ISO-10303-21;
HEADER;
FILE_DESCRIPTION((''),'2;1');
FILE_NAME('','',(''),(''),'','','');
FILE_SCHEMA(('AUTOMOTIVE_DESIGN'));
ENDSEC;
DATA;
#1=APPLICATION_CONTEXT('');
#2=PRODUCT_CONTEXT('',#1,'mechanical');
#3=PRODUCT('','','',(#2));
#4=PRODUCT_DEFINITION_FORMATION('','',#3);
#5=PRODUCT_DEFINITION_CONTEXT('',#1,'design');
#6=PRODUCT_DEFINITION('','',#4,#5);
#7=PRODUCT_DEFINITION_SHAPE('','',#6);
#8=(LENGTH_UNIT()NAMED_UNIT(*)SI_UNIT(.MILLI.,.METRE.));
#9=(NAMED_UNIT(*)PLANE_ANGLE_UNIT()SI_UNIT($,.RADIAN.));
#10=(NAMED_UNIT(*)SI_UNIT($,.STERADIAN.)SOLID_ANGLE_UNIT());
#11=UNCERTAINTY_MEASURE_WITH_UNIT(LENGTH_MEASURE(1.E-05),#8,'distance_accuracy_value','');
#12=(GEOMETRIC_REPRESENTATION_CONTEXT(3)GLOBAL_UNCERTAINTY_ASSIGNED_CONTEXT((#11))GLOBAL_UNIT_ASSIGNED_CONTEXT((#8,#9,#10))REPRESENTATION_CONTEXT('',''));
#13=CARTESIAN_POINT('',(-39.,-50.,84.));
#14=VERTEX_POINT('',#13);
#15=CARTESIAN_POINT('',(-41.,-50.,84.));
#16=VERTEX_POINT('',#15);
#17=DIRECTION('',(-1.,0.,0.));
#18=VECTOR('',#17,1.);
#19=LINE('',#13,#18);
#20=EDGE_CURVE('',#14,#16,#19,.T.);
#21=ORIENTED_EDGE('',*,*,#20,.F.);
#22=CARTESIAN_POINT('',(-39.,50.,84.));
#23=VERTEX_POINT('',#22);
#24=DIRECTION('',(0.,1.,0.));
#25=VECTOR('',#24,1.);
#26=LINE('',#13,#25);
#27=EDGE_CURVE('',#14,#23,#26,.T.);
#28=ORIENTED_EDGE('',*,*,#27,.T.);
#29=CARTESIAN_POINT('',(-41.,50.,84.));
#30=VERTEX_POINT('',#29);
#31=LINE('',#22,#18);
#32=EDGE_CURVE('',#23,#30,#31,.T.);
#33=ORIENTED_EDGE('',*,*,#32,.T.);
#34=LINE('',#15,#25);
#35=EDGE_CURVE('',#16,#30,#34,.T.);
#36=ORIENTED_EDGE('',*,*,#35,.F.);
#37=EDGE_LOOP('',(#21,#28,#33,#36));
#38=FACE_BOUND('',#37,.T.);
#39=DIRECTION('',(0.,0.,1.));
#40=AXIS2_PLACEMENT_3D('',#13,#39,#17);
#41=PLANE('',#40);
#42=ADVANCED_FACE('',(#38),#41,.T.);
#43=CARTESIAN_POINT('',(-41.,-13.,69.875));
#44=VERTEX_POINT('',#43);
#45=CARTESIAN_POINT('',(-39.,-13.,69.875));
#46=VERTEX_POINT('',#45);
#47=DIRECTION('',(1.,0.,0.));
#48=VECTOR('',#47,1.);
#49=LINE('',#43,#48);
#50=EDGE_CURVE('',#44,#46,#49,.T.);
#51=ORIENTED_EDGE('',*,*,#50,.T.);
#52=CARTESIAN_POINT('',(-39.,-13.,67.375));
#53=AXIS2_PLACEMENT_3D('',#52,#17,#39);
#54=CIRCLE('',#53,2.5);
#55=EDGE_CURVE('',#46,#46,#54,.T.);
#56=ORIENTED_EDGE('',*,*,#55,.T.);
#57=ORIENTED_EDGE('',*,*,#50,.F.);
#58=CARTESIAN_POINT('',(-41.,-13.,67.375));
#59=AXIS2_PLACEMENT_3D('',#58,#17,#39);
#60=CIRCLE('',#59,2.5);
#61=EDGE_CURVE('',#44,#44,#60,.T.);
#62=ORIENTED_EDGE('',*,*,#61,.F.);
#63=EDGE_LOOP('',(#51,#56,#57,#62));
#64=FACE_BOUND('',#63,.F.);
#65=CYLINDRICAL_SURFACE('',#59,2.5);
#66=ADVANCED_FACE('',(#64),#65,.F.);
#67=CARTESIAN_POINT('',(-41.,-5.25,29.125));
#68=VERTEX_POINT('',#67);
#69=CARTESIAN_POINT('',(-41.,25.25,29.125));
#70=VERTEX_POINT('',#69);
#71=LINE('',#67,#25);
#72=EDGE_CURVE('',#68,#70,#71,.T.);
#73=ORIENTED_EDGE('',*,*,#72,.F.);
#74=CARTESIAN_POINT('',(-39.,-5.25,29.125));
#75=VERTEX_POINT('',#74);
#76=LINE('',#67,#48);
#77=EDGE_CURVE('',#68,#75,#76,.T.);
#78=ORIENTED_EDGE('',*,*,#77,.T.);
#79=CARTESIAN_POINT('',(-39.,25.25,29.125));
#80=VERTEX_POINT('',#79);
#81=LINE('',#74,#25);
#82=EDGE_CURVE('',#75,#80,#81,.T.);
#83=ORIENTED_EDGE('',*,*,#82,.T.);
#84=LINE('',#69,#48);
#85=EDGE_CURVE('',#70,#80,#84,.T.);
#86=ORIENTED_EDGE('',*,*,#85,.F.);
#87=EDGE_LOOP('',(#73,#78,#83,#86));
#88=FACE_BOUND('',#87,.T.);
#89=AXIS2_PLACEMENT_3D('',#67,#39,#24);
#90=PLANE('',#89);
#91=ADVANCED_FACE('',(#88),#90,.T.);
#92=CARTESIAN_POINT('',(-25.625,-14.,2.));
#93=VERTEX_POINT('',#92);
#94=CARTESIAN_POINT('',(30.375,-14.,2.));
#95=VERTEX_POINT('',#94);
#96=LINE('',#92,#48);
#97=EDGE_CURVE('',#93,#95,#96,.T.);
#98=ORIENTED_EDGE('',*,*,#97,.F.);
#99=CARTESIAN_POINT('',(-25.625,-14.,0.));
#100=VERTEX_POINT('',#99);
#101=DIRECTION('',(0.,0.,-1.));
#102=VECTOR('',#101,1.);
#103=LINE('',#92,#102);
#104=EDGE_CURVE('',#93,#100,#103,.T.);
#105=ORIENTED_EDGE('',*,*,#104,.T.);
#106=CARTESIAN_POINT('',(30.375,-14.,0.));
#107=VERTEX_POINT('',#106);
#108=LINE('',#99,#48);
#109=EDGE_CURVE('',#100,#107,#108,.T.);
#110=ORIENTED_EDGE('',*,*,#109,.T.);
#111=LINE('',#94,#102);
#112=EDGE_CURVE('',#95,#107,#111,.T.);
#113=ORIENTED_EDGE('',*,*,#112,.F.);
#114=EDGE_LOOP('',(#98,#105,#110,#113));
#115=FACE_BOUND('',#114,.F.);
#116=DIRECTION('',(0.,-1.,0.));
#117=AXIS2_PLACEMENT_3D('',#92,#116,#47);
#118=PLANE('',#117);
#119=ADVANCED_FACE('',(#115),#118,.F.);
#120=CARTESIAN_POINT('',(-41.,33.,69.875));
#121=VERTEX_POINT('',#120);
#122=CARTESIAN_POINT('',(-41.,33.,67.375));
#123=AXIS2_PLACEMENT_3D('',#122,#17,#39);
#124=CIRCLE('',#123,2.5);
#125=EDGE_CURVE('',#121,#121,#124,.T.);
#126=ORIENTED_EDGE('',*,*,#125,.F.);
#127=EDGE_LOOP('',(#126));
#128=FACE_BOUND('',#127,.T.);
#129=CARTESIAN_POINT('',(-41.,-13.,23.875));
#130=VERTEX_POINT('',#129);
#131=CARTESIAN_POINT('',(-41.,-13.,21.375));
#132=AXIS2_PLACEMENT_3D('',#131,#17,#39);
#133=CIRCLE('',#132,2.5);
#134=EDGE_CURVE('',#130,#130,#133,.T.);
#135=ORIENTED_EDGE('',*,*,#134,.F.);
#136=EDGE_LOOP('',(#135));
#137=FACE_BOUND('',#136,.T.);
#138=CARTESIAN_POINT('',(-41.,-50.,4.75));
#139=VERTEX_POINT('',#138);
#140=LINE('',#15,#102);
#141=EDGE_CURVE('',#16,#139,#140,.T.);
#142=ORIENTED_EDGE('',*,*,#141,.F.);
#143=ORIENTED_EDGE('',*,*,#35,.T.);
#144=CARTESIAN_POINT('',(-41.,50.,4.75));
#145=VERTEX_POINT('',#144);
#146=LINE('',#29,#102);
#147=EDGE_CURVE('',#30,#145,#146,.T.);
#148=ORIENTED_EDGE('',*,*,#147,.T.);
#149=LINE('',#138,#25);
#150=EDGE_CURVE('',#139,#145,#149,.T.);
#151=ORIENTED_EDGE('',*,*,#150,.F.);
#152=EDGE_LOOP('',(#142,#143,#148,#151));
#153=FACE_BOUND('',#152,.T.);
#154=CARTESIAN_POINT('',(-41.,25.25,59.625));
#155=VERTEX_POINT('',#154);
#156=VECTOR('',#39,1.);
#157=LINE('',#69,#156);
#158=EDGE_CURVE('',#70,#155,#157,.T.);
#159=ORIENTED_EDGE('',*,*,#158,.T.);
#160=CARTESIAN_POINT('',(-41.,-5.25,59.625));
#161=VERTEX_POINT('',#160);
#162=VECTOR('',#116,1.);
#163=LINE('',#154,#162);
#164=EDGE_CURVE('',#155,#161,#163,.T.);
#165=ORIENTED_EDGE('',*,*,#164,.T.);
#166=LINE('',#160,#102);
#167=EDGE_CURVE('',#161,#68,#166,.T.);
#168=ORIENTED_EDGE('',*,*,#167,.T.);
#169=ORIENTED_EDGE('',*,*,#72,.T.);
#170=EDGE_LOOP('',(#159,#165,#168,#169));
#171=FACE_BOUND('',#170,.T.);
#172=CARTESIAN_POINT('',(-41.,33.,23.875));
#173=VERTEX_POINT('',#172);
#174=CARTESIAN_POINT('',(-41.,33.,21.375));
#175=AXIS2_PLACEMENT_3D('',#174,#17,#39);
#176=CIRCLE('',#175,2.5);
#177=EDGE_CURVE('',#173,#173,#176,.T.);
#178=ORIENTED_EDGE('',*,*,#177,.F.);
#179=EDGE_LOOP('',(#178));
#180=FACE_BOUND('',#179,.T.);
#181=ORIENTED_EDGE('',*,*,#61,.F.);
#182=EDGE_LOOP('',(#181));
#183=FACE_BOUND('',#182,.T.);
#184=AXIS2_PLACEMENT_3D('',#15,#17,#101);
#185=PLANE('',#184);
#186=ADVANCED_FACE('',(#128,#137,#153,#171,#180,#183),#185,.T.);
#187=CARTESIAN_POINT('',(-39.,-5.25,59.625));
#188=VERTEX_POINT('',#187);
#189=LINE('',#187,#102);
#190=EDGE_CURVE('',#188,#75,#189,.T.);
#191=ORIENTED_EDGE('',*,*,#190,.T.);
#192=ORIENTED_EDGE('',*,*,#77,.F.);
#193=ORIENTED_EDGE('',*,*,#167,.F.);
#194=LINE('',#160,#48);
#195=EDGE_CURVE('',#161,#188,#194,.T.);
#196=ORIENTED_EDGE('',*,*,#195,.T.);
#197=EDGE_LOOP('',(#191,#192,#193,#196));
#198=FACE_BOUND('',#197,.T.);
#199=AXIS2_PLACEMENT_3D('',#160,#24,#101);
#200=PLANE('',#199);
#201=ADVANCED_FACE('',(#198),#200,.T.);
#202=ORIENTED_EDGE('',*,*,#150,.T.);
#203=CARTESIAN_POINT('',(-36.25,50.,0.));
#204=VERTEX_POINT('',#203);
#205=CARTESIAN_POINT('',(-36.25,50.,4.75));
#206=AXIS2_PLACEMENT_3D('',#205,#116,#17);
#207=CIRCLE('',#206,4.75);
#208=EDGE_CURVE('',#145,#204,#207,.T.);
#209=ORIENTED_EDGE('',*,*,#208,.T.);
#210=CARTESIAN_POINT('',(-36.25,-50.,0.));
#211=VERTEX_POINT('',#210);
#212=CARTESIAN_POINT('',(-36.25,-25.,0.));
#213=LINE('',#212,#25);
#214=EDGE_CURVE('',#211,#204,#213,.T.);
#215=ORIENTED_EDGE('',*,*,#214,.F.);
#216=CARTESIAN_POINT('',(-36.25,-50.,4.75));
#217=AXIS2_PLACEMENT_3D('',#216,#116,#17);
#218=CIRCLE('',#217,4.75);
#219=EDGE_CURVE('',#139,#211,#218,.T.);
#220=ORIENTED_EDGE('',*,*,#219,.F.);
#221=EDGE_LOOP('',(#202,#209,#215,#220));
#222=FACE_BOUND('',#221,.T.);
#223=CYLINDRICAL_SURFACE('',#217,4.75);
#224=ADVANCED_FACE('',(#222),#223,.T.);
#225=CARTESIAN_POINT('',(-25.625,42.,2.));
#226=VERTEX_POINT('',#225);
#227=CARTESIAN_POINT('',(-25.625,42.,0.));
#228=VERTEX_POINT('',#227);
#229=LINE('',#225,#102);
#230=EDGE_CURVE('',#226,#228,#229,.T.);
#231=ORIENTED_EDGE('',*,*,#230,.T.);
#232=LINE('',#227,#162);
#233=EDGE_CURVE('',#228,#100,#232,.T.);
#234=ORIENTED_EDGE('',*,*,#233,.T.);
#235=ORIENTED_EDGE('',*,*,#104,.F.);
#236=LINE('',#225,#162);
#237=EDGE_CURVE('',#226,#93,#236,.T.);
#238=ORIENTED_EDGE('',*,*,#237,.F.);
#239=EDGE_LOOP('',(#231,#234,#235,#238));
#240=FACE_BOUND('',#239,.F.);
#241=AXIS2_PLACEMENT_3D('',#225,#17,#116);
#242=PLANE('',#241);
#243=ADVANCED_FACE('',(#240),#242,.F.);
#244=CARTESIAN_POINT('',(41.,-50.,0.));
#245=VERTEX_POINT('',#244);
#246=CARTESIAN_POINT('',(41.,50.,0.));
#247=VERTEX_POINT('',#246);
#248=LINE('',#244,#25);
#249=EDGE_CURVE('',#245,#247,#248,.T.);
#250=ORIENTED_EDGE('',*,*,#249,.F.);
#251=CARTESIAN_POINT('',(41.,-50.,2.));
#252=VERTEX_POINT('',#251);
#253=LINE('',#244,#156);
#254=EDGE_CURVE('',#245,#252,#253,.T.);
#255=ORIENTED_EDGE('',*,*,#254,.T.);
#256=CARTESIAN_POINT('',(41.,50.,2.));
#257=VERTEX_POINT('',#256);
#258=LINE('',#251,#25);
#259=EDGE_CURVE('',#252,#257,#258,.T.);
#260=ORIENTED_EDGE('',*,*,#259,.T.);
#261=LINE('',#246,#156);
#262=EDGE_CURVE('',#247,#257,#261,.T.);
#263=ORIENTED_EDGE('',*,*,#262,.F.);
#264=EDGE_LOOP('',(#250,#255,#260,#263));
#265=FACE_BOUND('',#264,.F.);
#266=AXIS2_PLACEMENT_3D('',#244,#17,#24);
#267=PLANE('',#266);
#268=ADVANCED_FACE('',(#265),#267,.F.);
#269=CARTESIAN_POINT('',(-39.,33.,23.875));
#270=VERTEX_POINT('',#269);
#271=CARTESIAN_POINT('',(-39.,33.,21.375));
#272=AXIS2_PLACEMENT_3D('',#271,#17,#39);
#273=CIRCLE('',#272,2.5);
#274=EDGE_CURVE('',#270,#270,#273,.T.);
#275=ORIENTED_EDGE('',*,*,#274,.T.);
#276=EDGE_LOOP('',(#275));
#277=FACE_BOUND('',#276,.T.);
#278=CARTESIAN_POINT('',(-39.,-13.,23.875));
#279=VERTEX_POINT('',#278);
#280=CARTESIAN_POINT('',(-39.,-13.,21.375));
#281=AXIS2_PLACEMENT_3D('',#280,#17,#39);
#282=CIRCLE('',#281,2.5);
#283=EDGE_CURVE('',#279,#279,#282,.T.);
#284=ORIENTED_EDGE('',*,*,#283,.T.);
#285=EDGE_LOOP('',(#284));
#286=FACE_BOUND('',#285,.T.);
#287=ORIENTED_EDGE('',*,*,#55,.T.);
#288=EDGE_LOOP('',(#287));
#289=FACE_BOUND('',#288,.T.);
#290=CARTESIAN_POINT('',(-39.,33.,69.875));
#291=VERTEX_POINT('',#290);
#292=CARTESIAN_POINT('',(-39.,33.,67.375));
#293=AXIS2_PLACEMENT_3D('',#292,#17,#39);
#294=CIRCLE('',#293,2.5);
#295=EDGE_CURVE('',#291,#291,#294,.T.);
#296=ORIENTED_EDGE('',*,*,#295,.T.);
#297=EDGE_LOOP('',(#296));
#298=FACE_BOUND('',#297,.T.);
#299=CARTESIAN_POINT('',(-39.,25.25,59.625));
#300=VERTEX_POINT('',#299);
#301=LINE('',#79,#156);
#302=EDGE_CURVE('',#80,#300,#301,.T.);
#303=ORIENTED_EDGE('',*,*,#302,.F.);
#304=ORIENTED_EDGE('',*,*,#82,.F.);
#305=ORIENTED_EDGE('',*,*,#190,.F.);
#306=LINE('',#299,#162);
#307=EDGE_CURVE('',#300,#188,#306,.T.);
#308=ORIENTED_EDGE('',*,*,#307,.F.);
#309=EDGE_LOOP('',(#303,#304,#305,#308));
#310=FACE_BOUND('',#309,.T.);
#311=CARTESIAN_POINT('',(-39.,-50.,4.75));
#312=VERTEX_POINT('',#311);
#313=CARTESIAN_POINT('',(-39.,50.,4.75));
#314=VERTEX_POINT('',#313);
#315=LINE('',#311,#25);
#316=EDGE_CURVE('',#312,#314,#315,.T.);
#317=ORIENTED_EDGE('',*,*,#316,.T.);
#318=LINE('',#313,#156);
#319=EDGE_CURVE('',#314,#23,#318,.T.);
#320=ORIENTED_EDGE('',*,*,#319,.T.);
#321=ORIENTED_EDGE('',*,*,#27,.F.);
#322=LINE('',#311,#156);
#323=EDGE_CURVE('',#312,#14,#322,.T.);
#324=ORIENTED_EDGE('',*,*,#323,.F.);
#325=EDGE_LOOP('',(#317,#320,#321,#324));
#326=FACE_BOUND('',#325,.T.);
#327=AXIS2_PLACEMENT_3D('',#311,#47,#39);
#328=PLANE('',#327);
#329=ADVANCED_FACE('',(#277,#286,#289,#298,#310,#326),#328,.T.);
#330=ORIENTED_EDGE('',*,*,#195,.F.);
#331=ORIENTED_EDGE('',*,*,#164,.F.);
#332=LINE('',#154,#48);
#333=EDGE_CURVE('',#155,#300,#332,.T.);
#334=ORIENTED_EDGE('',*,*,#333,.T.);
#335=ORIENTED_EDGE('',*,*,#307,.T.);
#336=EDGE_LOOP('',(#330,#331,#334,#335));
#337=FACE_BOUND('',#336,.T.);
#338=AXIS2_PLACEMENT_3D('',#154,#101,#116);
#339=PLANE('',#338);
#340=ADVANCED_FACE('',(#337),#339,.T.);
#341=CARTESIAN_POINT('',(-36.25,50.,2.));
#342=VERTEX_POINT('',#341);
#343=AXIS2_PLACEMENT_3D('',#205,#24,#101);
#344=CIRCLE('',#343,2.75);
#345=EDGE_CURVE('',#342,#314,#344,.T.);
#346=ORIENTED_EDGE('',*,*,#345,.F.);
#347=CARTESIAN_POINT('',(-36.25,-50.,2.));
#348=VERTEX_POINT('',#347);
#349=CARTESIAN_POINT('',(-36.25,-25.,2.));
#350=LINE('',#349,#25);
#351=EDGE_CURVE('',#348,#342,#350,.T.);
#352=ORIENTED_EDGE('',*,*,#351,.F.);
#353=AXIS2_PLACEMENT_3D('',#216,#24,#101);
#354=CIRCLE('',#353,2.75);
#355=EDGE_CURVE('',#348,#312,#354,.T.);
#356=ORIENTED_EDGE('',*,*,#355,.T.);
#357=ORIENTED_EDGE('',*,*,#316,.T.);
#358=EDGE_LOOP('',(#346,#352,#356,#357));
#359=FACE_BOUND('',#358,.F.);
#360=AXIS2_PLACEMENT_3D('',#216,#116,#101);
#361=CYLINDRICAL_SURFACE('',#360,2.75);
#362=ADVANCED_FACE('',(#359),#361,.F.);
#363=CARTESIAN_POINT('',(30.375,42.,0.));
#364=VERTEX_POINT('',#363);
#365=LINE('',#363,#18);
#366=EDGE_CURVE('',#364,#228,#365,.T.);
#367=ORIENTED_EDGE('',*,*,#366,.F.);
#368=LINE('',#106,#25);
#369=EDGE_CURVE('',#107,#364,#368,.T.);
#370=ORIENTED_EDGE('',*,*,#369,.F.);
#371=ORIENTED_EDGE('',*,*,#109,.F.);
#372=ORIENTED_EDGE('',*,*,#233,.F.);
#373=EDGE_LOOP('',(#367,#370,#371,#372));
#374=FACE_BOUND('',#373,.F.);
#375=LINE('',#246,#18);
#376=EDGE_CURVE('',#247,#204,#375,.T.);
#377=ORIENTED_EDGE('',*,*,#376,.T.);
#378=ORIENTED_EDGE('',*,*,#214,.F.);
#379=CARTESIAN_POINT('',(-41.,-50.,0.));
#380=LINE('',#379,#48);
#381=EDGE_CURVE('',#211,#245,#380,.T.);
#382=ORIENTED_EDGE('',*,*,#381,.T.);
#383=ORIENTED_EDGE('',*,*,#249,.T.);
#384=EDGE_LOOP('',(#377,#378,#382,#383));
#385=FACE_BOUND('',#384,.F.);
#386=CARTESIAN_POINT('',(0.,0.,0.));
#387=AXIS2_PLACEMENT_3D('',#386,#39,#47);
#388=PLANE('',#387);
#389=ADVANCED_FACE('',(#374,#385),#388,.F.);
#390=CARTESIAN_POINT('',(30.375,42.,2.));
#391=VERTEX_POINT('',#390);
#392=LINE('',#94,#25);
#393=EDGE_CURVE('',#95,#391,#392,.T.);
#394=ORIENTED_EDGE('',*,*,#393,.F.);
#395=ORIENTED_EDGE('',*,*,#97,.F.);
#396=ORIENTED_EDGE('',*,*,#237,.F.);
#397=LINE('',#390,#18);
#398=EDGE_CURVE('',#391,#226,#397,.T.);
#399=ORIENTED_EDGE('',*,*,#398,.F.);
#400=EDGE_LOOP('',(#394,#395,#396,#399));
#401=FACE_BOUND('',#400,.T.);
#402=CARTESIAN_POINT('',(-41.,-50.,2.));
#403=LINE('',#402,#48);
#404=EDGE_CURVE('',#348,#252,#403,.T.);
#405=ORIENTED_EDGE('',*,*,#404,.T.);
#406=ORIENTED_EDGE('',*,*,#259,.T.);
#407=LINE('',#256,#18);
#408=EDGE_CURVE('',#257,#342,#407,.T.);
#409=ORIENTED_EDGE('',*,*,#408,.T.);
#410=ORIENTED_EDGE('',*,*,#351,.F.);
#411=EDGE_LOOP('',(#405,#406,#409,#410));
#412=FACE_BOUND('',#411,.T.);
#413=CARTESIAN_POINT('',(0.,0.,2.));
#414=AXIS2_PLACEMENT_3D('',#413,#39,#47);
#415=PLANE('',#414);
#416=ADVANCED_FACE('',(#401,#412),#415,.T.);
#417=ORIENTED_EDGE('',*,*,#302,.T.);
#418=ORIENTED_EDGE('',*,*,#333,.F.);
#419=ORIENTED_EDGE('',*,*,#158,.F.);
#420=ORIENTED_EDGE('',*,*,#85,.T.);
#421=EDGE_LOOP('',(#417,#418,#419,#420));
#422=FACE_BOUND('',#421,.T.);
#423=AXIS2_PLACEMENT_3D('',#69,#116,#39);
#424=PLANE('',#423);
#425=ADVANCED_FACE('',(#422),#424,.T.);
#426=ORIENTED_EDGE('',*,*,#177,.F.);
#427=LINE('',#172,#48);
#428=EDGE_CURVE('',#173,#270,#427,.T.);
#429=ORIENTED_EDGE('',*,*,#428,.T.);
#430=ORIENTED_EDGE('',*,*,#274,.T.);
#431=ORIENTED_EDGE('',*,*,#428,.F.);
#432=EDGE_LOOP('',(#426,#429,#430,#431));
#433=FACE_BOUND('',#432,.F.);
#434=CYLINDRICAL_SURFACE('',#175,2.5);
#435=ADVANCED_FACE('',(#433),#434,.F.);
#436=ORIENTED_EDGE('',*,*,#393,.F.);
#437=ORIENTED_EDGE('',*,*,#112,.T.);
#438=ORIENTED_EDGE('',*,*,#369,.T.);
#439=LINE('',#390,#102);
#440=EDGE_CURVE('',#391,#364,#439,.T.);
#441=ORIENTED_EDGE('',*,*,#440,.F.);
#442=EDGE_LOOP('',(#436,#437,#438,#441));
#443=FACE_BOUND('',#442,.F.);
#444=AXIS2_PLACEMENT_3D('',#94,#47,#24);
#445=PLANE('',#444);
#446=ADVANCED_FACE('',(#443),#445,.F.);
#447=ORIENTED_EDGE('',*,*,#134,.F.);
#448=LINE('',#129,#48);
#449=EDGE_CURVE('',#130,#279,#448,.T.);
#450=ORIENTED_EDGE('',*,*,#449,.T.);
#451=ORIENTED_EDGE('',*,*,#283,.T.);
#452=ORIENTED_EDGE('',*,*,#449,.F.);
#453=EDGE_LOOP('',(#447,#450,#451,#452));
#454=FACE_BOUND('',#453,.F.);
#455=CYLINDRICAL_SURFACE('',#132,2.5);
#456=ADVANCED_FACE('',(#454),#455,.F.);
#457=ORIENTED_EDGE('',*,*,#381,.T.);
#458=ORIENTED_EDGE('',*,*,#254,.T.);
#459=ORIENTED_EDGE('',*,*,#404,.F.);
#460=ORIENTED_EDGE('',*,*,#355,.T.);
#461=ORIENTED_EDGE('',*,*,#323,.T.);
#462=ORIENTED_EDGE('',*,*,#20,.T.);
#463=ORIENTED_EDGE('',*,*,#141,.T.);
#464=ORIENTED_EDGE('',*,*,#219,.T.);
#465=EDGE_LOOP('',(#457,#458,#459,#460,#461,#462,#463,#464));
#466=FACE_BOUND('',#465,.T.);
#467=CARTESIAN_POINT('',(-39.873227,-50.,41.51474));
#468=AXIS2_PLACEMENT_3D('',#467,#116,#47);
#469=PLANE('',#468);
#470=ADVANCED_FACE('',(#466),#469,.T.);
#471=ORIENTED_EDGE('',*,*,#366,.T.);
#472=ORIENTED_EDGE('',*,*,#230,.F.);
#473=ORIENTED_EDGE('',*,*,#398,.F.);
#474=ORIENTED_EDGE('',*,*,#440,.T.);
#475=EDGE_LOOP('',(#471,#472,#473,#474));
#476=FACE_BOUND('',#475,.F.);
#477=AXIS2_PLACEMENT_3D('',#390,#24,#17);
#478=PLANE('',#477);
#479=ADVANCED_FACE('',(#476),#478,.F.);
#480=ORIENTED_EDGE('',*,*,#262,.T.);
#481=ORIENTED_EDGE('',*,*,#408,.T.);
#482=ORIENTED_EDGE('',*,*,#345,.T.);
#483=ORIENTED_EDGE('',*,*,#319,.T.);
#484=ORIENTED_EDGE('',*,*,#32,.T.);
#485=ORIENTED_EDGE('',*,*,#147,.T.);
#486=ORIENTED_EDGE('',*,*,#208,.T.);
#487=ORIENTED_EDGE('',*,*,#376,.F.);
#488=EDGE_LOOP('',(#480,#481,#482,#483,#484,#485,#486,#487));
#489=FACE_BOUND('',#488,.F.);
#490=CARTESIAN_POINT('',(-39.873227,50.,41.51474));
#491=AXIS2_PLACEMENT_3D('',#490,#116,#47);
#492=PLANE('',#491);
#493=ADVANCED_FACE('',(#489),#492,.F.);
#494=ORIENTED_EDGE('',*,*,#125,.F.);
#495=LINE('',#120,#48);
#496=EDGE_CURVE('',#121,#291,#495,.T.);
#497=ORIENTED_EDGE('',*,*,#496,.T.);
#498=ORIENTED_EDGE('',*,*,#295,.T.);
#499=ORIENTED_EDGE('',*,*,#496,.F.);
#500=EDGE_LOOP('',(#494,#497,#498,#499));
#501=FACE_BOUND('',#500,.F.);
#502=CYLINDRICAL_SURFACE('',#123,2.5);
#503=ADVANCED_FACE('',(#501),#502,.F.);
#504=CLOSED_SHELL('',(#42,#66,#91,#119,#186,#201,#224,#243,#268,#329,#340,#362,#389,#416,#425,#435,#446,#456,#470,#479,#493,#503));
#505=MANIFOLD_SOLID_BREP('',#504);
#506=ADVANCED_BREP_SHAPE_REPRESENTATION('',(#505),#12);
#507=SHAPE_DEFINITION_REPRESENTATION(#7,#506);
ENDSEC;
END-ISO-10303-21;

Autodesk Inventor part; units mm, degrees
ref_plane "YZ Plane" through (0, 0, 0) normal (1, 0, 0) x (0, 1, 0)
ref_plane "XZ Plane" through (0, 0, 0) normal (0, 1, 0) x (-1, 0, 0)
ref_plane "XY Plane" through (0, 0, 0) normal (0, 0, 1) x (1, 0, 0)
sketch "Sketch1" plane through (0, 0, 0) normal (0, 0, 1) x (1, 0, 0)
  line L0 (-41, -50) -> (41, -50)
  line L1 (41, -50) -> (41, 50)
  line L2 (41, 50) -> (-41, 50)
  line L3 (-41, 50) -> (-41, -50)
  line L4 (-41, -50) -> (41, 50) construction
  line L5 (41, -50) -> (-41, 50) construction
  point P0 (0, 0)
  dimension "d154" = 82
  dimension "d155" = 100
extrude "Plate5" add sketch "Sketch1" along normal blind 2
sketch "Sketch7" plane through (-39, -50, 0) normal (-1, 0, 0) x (0, -1, 0)
  line L0 (-100, 0) -> (0, 0)
  line L1 (0, 0) -> (0, 84)
  line L2 (0, 84) -> (-100, 84)
  line L3 (-100, 84) -> (-100, 0)
edge flange "Flange3" height 84 angle 90 thickness 2 bend radius 2.75 thickness toward (-1, 0, 0) relief round relief width 2 relief depth 1 edges at (-41, 0, 2) wall of the first edge with corners at (-39, 50, 0) (-39, -50, 0) (-39, -50, 84) (-39, 50, 84)
bend "Bend3"
corner "Corner3"
sketch "Sketch8" plane through (0, 0, 2) normal (0, 0, 1) x (1, 0, 0)
  line L0 (41, 50) -> (41, -50) projected
  line L1 (-36.25, 50) -> (41, 50) projected
  line L2 (30.375, 42) -> (-25.625, 42)
  line L3 (-25.625, 42) -> (-25.625, -14)
  line L4 (-25.625, -14) -> (30.375, -14)
  line L5 (30.375, -14) -> (30.375, 42)
  line L6 (30.375, 42) -> (-25.625, -14) construction
  line L7 (-25.625, 42) -> (30.375, -14) construction
  point P0 (0, 0)
  point P1 (2.375, 14)
  point P2 (2.375, 50)
  dimension "d167" = 56
  dimension "d168" = 56
  dimension "d169" = 8
extrude "Cut1" cut sketch "Sketch8" against normal blind 2
sketch "Sketch9" plane through (-41, -50, 84) normal (-1, 0, 0) x (0, 0, 1)
  line L0 (-24.375, 44.75) -> (-54.875, 44.75)
  line L1 (-54.875, 44.75) -> (-54.875, 75.25)
  line L2 (-54.875, 75.25) -> (-24.375, 75.25)
  line L3 (-24.375, 75.25) -> (-24.375, 44.75)
  line L4 (-24.375, 44.75) -> (-54.875, 75.25) construction
  line L5 (-54.875, 44.75) -> (-24.375, 75.25) construction
  circle A0 centre (-16.625, 37) radius 2.5
  circle A1 centre (-62.625, 37) radius 2.5
  circle A2 centre (-62.625, 83) radius 2.5
  circle A3 centre (-16.625, 83) radius 2.5
  circle A4 centre (-39.625, 60) radius 32.5269 construction
  line L6 (-54.875, 44.75) -> (-62.625, 37) construction
  line L7 (-14.125, 34.5) -> (-65.125, 34.5) construction
  line L8 (-65.125, 34.5) -> (-65.125, 85.5) construction
  line L9 (-65.125, 85.5) -> (-14.125, 85.5) construction
  line L10 (-14.125, 85.5) -> (-14.125, 34.5) construction
  line L11 (-14.125, 34.5) -> (-65.125, 85.5) construction
  line L12 (-65.125, 34.5) -> (-14.125, 85.5) construction
  line L13 (-79.25, 100) -> (0, 100) projected
  line L14 (-39.625, 100) -> (-39.625, 60) construction
  circle A5 centre (-62.625, 83) radius 10.9602 construction
  line L15 (-16.625, 37) -> (-62.625, 37) construction
  line L16 (-62.625, 37) -> (-62.625, 83) construction
  line L17 (-62.625, 83) -> (-16.625, 83) construction
  line L18 (-16.625, 83) -> (-16.625, 37) construction
  line L19 (-16.625, 37) -> (-62.625, 83) construction
  line L20 (-62.625, 37) -> (-16.625, 83) construction
  point P0 (-84, 50)
  point P1 (-104.8197, 150.8767)
  point P2 (-104.8197, 150.8767)
  dimension "d181" = 21.9203
  dimension "d174" = 30.5
  dimension "d175" = 30.5
  dimension "d176" = 5
  dimension "d179" = 40
  dimension "d180" = 51
  dimension "d184" = 46
extrude "Cut2" cut sketch "Sketch9" against normal blind 2
properties part number "PRS 940-510 FDS Central tube wall" material "Stainless Steel"
